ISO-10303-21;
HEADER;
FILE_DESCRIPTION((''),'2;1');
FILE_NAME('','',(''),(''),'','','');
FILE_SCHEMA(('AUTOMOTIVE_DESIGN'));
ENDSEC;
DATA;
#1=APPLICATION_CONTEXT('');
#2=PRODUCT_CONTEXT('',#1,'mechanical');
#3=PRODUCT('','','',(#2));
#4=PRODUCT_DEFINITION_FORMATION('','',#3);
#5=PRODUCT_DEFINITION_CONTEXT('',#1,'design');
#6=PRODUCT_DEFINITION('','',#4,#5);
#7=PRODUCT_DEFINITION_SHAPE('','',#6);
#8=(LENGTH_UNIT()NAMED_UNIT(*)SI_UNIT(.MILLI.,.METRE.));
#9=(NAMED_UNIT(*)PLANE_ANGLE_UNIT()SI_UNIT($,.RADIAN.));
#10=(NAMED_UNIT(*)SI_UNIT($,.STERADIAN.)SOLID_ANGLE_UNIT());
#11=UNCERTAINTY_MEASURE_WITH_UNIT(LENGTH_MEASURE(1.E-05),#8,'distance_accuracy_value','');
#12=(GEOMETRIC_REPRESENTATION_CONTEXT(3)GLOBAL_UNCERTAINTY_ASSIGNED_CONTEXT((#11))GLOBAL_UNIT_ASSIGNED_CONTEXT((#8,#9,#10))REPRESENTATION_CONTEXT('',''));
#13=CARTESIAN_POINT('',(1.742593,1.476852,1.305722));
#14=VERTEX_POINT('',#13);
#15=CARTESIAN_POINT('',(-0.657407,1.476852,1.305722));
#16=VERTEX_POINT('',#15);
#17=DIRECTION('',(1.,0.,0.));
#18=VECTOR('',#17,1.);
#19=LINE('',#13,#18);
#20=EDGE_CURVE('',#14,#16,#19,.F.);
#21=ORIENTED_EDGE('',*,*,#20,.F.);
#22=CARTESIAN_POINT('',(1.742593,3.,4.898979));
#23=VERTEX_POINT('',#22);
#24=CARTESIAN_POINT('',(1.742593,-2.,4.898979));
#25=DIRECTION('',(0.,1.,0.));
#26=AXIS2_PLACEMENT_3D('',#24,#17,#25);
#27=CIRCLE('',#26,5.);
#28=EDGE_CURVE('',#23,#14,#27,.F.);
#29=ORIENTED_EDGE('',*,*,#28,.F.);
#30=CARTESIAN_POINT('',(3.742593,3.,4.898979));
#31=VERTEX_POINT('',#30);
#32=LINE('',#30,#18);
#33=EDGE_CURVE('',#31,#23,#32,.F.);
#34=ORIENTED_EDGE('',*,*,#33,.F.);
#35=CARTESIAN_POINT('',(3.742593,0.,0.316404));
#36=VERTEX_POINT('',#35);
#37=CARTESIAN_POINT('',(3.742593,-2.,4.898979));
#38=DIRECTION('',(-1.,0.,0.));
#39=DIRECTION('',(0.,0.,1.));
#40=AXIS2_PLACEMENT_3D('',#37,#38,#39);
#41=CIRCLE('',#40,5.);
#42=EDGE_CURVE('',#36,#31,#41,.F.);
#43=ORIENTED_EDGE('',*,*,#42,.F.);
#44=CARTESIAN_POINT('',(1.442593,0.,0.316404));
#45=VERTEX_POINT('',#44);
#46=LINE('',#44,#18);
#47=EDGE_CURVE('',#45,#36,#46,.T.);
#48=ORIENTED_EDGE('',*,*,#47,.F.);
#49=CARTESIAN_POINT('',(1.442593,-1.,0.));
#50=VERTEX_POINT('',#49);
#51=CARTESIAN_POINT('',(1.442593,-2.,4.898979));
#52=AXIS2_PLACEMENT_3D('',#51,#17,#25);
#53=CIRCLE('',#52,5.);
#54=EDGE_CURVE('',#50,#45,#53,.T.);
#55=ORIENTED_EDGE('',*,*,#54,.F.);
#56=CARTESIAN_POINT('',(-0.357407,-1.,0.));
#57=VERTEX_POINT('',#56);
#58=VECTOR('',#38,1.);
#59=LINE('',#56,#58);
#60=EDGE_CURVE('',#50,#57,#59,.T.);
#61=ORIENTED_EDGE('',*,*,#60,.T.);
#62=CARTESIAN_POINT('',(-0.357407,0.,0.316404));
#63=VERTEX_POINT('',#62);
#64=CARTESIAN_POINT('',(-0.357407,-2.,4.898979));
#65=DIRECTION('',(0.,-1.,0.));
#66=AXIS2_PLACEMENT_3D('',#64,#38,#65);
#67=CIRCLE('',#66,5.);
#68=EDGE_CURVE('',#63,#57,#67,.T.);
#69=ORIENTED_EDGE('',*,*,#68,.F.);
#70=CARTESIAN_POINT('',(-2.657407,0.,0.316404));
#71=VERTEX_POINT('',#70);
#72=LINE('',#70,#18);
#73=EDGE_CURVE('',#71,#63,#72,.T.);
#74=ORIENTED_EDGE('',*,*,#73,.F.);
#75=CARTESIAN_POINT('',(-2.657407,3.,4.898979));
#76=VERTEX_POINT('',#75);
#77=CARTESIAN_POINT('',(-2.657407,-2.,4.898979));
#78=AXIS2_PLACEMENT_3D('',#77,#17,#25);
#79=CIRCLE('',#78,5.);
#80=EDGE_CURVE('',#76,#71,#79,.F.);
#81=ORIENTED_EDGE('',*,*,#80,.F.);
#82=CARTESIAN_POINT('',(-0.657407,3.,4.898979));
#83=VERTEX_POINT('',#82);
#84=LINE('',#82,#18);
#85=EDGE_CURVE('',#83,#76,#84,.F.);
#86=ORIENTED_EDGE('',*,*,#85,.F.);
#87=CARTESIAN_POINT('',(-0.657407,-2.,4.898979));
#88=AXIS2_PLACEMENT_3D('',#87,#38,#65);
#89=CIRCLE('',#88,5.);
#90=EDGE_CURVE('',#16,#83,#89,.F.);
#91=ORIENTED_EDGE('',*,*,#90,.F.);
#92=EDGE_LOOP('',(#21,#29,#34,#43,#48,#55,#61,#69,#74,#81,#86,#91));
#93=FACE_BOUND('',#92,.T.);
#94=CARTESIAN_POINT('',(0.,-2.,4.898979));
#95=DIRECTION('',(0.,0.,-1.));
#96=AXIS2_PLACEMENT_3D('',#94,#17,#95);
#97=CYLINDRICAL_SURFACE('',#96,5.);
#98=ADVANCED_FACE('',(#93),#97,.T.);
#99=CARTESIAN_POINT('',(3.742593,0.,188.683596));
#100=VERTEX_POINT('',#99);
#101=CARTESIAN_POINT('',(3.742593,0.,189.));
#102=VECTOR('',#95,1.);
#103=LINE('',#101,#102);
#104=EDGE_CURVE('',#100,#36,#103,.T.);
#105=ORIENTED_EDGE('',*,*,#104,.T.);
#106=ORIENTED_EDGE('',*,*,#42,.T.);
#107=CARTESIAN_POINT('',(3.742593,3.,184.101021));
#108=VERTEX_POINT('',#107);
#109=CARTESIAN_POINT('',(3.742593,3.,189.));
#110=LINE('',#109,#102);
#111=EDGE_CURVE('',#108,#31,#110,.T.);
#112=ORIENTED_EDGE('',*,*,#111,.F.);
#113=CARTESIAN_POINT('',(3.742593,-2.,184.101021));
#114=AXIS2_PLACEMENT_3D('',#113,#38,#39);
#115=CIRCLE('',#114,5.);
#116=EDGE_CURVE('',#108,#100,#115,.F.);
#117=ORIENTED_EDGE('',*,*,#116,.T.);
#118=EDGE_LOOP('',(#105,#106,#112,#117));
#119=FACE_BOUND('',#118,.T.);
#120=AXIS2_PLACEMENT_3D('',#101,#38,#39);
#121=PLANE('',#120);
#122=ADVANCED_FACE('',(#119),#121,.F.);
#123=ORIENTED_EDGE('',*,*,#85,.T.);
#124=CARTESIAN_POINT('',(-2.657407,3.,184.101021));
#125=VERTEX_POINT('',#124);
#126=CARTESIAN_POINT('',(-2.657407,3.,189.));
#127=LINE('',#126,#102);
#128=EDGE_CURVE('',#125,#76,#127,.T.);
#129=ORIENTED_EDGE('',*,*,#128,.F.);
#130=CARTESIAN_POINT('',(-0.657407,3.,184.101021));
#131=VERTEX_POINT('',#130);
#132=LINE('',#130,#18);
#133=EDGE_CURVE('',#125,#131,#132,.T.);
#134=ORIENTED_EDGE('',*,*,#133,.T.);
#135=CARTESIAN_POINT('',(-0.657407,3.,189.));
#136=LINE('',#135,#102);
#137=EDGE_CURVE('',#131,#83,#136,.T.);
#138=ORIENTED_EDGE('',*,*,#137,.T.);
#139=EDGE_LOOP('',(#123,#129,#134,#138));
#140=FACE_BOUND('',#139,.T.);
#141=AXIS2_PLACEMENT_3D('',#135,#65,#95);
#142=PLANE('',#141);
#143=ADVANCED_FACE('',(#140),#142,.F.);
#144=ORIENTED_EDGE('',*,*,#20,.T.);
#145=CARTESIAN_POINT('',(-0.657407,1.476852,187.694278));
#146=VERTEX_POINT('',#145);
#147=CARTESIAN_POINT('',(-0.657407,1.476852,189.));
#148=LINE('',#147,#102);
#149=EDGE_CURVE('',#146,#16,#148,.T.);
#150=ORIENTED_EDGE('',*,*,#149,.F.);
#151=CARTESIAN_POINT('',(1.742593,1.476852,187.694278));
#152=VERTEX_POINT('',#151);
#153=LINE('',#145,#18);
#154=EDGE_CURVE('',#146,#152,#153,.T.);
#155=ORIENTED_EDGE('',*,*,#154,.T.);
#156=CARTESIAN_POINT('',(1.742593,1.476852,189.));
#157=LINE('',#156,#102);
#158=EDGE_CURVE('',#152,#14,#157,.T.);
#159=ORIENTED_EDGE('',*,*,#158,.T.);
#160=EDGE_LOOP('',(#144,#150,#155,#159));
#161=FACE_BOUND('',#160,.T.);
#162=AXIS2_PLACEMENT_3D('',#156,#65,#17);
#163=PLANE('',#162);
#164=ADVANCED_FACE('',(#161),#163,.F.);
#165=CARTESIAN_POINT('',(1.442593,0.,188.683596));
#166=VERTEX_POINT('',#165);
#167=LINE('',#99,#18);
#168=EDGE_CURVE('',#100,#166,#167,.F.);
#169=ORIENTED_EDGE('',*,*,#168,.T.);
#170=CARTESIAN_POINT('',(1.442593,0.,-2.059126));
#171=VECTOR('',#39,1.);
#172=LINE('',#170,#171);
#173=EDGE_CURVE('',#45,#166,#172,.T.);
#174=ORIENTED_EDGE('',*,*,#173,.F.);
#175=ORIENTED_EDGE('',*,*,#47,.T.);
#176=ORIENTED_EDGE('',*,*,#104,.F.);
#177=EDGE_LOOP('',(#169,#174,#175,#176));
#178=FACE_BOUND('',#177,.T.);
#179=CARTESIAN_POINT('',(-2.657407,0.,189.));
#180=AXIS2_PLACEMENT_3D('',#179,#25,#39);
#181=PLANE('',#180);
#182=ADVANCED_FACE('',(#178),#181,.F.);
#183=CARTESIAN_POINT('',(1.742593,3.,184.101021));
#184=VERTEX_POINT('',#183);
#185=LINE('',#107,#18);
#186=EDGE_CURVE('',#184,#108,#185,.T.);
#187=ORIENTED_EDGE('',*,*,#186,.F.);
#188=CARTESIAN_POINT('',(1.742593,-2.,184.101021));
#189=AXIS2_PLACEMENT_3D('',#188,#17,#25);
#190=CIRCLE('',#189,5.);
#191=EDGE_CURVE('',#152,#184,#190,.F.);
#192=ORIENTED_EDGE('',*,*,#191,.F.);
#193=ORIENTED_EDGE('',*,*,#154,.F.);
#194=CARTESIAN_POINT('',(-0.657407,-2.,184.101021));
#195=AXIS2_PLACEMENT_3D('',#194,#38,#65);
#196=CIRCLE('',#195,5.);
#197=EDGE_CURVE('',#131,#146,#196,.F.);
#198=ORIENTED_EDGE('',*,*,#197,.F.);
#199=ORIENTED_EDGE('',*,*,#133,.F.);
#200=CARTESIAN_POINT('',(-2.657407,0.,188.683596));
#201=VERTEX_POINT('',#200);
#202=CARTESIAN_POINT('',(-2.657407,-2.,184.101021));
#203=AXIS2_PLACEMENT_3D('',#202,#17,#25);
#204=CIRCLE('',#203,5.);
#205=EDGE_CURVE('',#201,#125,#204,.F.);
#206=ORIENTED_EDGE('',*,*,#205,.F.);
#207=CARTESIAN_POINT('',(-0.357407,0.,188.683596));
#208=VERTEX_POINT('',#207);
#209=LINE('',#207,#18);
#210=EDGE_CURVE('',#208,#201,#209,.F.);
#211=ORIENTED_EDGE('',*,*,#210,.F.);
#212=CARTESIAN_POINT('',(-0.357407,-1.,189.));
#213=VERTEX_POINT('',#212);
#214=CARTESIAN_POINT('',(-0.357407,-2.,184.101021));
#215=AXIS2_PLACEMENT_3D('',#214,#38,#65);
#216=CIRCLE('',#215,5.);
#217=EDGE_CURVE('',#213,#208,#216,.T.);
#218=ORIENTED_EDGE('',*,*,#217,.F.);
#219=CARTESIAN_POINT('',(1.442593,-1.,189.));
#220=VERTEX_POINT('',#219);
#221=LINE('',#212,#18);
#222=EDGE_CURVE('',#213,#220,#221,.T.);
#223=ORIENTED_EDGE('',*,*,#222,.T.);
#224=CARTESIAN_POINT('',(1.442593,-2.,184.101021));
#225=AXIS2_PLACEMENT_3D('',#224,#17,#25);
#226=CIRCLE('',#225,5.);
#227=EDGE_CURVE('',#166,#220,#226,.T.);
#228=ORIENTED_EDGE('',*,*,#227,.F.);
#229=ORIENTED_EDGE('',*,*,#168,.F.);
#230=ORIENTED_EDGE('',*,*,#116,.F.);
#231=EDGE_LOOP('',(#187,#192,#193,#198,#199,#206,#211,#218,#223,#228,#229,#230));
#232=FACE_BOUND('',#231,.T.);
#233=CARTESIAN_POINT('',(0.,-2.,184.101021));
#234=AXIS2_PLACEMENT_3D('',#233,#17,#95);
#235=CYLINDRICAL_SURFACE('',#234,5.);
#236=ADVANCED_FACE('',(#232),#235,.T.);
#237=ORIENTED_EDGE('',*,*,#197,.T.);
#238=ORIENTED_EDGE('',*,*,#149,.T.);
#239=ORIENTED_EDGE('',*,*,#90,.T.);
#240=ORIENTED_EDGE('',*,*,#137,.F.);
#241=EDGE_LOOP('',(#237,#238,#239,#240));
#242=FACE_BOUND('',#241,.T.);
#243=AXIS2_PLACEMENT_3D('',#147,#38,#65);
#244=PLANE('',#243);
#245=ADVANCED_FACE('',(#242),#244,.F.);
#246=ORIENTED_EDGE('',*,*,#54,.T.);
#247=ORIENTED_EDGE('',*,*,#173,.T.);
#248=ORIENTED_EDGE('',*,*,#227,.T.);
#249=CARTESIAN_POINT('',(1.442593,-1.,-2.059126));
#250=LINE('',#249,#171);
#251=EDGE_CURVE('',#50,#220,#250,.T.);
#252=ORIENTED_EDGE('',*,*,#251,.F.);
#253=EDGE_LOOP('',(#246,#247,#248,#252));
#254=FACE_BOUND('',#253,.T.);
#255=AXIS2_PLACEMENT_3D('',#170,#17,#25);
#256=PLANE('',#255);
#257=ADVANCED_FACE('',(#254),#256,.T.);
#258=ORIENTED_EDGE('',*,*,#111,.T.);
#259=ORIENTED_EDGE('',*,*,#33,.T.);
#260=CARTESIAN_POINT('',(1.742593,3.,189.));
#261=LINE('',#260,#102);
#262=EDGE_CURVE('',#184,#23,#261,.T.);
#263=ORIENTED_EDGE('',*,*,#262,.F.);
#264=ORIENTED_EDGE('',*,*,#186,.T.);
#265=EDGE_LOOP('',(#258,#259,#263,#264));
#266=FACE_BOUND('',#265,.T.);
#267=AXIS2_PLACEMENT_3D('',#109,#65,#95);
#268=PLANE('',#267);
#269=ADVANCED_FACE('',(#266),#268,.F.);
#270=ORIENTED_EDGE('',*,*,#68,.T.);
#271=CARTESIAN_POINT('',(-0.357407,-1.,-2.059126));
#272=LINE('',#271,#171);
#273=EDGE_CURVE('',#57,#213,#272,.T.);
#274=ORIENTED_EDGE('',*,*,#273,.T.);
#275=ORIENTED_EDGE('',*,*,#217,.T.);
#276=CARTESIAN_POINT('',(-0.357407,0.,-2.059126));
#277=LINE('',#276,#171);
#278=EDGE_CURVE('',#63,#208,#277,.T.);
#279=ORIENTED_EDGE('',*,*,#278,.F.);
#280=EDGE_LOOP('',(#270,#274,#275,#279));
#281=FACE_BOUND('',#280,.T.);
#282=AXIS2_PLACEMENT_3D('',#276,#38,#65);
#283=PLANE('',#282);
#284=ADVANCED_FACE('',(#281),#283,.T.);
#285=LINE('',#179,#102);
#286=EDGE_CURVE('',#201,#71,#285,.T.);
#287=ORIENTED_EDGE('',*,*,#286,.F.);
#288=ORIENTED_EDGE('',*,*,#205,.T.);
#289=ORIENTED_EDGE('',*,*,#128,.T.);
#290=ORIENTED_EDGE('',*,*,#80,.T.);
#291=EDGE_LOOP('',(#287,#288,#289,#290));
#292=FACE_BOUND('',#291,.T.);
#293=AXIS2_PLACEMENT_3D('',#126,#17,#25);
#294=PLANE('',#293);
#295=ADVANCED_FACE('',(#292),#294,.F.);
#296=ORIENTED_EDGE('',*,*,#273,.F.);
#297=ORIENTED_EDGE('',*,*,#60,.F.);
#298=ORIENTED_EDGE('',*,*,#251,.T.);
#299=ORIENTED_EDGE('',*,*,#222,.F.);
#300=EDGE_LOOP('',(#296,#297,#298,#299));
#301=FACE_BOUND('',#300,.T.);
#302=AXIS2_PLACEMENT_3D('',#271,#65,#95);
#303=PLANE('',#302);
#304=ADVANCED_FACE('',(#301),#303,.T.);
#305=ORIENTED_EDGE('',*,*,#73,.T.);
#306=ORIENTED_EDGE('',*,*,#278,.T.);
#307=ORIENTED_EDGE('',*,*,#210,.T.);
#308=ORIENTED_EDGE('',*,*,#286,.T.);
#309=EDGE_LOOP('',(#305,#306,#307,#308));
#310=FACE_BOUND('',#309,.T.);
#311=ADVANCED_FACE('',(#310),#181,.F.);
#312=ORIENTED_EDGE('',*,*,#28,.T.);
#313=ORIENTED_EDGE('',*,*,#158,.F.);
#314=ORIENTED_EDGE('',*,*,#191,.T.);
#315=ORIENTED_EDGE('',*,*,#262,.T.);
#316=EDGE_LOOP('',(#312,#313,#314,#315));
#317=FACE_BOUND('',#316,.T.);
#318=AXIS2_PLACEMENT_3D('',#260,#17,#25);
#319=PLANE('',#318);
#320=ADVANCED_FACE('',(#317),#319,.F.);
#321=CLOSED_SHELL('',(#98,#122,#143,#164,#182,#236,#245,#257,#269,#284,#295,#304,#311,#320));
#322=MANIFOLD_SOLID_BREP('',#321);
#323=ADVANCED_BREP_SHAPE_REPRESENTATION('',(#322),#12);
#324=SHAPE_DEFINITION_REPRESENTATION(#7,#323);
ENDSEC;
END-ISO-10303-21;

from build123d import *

# Parameters (mm, degrees)
BOSS_EXTRUDE1_DEPTH = 189
SKETCH3_W           = 1.8
SKETCH3_H           = 1
BOSS_EXTRUDE2_DEPTH = 189
FILLET1_START       = -4
FILLET1_DEPTH       = 9


with BuildPart() as part:
    # Sketch1 → Boss-Extrude1 (new body)
    with BuildSketch(Plane.XY):
        Polygon((-2.657407407, 0), (3.742592593, 0), (3.742592593, 3), (1.742592593, 3), (1.742592593, 1.476851852), (-0.657407407, 1.476851852), (-0.657407407, 3), (-2.657407407, 3), align=None)
    extrude(amount=BOSS_EXTRUDE1_DEPTH)

    # Sketch3 → Boss-Extrude2 (add)
    with BuildSketch(Plane.XY.offset(189)):
        with Locations((0.542592593, -0.5)):
            Rectangle(SKETCH3_W, SKETCH3_H)
    extrude(amount=-BOSS_EXTRUDE2_DEPTH)

    # Fillet1: read off the stored shape, not the designer's step
    # Fillet1 outline → Fillet1 (cut)
    with BuildSketch(Plane.YZ.offset(FILLET1_START)):
        with BuildLine():
            Line((-1, 0), (3, 0))
            Line((3, 0), (3, 4.898979486))
            ThreePointArc((3, 4.898979486), (1.872983346, 1.736701826), (-1, 0))
        make_face()
        with BuildLine():
            ThreePointArc((-1, 189), (1.872983346, 187.263298174), (3, 184.101020514))
            Line((3, 184.101020514), (3, 189))
            Line((3, 189), (-1, 189))
        make_face()
    extrude(amount=FILLET1_DEPTH, mode=Mode.SUBTRACT)


solid = part.part
